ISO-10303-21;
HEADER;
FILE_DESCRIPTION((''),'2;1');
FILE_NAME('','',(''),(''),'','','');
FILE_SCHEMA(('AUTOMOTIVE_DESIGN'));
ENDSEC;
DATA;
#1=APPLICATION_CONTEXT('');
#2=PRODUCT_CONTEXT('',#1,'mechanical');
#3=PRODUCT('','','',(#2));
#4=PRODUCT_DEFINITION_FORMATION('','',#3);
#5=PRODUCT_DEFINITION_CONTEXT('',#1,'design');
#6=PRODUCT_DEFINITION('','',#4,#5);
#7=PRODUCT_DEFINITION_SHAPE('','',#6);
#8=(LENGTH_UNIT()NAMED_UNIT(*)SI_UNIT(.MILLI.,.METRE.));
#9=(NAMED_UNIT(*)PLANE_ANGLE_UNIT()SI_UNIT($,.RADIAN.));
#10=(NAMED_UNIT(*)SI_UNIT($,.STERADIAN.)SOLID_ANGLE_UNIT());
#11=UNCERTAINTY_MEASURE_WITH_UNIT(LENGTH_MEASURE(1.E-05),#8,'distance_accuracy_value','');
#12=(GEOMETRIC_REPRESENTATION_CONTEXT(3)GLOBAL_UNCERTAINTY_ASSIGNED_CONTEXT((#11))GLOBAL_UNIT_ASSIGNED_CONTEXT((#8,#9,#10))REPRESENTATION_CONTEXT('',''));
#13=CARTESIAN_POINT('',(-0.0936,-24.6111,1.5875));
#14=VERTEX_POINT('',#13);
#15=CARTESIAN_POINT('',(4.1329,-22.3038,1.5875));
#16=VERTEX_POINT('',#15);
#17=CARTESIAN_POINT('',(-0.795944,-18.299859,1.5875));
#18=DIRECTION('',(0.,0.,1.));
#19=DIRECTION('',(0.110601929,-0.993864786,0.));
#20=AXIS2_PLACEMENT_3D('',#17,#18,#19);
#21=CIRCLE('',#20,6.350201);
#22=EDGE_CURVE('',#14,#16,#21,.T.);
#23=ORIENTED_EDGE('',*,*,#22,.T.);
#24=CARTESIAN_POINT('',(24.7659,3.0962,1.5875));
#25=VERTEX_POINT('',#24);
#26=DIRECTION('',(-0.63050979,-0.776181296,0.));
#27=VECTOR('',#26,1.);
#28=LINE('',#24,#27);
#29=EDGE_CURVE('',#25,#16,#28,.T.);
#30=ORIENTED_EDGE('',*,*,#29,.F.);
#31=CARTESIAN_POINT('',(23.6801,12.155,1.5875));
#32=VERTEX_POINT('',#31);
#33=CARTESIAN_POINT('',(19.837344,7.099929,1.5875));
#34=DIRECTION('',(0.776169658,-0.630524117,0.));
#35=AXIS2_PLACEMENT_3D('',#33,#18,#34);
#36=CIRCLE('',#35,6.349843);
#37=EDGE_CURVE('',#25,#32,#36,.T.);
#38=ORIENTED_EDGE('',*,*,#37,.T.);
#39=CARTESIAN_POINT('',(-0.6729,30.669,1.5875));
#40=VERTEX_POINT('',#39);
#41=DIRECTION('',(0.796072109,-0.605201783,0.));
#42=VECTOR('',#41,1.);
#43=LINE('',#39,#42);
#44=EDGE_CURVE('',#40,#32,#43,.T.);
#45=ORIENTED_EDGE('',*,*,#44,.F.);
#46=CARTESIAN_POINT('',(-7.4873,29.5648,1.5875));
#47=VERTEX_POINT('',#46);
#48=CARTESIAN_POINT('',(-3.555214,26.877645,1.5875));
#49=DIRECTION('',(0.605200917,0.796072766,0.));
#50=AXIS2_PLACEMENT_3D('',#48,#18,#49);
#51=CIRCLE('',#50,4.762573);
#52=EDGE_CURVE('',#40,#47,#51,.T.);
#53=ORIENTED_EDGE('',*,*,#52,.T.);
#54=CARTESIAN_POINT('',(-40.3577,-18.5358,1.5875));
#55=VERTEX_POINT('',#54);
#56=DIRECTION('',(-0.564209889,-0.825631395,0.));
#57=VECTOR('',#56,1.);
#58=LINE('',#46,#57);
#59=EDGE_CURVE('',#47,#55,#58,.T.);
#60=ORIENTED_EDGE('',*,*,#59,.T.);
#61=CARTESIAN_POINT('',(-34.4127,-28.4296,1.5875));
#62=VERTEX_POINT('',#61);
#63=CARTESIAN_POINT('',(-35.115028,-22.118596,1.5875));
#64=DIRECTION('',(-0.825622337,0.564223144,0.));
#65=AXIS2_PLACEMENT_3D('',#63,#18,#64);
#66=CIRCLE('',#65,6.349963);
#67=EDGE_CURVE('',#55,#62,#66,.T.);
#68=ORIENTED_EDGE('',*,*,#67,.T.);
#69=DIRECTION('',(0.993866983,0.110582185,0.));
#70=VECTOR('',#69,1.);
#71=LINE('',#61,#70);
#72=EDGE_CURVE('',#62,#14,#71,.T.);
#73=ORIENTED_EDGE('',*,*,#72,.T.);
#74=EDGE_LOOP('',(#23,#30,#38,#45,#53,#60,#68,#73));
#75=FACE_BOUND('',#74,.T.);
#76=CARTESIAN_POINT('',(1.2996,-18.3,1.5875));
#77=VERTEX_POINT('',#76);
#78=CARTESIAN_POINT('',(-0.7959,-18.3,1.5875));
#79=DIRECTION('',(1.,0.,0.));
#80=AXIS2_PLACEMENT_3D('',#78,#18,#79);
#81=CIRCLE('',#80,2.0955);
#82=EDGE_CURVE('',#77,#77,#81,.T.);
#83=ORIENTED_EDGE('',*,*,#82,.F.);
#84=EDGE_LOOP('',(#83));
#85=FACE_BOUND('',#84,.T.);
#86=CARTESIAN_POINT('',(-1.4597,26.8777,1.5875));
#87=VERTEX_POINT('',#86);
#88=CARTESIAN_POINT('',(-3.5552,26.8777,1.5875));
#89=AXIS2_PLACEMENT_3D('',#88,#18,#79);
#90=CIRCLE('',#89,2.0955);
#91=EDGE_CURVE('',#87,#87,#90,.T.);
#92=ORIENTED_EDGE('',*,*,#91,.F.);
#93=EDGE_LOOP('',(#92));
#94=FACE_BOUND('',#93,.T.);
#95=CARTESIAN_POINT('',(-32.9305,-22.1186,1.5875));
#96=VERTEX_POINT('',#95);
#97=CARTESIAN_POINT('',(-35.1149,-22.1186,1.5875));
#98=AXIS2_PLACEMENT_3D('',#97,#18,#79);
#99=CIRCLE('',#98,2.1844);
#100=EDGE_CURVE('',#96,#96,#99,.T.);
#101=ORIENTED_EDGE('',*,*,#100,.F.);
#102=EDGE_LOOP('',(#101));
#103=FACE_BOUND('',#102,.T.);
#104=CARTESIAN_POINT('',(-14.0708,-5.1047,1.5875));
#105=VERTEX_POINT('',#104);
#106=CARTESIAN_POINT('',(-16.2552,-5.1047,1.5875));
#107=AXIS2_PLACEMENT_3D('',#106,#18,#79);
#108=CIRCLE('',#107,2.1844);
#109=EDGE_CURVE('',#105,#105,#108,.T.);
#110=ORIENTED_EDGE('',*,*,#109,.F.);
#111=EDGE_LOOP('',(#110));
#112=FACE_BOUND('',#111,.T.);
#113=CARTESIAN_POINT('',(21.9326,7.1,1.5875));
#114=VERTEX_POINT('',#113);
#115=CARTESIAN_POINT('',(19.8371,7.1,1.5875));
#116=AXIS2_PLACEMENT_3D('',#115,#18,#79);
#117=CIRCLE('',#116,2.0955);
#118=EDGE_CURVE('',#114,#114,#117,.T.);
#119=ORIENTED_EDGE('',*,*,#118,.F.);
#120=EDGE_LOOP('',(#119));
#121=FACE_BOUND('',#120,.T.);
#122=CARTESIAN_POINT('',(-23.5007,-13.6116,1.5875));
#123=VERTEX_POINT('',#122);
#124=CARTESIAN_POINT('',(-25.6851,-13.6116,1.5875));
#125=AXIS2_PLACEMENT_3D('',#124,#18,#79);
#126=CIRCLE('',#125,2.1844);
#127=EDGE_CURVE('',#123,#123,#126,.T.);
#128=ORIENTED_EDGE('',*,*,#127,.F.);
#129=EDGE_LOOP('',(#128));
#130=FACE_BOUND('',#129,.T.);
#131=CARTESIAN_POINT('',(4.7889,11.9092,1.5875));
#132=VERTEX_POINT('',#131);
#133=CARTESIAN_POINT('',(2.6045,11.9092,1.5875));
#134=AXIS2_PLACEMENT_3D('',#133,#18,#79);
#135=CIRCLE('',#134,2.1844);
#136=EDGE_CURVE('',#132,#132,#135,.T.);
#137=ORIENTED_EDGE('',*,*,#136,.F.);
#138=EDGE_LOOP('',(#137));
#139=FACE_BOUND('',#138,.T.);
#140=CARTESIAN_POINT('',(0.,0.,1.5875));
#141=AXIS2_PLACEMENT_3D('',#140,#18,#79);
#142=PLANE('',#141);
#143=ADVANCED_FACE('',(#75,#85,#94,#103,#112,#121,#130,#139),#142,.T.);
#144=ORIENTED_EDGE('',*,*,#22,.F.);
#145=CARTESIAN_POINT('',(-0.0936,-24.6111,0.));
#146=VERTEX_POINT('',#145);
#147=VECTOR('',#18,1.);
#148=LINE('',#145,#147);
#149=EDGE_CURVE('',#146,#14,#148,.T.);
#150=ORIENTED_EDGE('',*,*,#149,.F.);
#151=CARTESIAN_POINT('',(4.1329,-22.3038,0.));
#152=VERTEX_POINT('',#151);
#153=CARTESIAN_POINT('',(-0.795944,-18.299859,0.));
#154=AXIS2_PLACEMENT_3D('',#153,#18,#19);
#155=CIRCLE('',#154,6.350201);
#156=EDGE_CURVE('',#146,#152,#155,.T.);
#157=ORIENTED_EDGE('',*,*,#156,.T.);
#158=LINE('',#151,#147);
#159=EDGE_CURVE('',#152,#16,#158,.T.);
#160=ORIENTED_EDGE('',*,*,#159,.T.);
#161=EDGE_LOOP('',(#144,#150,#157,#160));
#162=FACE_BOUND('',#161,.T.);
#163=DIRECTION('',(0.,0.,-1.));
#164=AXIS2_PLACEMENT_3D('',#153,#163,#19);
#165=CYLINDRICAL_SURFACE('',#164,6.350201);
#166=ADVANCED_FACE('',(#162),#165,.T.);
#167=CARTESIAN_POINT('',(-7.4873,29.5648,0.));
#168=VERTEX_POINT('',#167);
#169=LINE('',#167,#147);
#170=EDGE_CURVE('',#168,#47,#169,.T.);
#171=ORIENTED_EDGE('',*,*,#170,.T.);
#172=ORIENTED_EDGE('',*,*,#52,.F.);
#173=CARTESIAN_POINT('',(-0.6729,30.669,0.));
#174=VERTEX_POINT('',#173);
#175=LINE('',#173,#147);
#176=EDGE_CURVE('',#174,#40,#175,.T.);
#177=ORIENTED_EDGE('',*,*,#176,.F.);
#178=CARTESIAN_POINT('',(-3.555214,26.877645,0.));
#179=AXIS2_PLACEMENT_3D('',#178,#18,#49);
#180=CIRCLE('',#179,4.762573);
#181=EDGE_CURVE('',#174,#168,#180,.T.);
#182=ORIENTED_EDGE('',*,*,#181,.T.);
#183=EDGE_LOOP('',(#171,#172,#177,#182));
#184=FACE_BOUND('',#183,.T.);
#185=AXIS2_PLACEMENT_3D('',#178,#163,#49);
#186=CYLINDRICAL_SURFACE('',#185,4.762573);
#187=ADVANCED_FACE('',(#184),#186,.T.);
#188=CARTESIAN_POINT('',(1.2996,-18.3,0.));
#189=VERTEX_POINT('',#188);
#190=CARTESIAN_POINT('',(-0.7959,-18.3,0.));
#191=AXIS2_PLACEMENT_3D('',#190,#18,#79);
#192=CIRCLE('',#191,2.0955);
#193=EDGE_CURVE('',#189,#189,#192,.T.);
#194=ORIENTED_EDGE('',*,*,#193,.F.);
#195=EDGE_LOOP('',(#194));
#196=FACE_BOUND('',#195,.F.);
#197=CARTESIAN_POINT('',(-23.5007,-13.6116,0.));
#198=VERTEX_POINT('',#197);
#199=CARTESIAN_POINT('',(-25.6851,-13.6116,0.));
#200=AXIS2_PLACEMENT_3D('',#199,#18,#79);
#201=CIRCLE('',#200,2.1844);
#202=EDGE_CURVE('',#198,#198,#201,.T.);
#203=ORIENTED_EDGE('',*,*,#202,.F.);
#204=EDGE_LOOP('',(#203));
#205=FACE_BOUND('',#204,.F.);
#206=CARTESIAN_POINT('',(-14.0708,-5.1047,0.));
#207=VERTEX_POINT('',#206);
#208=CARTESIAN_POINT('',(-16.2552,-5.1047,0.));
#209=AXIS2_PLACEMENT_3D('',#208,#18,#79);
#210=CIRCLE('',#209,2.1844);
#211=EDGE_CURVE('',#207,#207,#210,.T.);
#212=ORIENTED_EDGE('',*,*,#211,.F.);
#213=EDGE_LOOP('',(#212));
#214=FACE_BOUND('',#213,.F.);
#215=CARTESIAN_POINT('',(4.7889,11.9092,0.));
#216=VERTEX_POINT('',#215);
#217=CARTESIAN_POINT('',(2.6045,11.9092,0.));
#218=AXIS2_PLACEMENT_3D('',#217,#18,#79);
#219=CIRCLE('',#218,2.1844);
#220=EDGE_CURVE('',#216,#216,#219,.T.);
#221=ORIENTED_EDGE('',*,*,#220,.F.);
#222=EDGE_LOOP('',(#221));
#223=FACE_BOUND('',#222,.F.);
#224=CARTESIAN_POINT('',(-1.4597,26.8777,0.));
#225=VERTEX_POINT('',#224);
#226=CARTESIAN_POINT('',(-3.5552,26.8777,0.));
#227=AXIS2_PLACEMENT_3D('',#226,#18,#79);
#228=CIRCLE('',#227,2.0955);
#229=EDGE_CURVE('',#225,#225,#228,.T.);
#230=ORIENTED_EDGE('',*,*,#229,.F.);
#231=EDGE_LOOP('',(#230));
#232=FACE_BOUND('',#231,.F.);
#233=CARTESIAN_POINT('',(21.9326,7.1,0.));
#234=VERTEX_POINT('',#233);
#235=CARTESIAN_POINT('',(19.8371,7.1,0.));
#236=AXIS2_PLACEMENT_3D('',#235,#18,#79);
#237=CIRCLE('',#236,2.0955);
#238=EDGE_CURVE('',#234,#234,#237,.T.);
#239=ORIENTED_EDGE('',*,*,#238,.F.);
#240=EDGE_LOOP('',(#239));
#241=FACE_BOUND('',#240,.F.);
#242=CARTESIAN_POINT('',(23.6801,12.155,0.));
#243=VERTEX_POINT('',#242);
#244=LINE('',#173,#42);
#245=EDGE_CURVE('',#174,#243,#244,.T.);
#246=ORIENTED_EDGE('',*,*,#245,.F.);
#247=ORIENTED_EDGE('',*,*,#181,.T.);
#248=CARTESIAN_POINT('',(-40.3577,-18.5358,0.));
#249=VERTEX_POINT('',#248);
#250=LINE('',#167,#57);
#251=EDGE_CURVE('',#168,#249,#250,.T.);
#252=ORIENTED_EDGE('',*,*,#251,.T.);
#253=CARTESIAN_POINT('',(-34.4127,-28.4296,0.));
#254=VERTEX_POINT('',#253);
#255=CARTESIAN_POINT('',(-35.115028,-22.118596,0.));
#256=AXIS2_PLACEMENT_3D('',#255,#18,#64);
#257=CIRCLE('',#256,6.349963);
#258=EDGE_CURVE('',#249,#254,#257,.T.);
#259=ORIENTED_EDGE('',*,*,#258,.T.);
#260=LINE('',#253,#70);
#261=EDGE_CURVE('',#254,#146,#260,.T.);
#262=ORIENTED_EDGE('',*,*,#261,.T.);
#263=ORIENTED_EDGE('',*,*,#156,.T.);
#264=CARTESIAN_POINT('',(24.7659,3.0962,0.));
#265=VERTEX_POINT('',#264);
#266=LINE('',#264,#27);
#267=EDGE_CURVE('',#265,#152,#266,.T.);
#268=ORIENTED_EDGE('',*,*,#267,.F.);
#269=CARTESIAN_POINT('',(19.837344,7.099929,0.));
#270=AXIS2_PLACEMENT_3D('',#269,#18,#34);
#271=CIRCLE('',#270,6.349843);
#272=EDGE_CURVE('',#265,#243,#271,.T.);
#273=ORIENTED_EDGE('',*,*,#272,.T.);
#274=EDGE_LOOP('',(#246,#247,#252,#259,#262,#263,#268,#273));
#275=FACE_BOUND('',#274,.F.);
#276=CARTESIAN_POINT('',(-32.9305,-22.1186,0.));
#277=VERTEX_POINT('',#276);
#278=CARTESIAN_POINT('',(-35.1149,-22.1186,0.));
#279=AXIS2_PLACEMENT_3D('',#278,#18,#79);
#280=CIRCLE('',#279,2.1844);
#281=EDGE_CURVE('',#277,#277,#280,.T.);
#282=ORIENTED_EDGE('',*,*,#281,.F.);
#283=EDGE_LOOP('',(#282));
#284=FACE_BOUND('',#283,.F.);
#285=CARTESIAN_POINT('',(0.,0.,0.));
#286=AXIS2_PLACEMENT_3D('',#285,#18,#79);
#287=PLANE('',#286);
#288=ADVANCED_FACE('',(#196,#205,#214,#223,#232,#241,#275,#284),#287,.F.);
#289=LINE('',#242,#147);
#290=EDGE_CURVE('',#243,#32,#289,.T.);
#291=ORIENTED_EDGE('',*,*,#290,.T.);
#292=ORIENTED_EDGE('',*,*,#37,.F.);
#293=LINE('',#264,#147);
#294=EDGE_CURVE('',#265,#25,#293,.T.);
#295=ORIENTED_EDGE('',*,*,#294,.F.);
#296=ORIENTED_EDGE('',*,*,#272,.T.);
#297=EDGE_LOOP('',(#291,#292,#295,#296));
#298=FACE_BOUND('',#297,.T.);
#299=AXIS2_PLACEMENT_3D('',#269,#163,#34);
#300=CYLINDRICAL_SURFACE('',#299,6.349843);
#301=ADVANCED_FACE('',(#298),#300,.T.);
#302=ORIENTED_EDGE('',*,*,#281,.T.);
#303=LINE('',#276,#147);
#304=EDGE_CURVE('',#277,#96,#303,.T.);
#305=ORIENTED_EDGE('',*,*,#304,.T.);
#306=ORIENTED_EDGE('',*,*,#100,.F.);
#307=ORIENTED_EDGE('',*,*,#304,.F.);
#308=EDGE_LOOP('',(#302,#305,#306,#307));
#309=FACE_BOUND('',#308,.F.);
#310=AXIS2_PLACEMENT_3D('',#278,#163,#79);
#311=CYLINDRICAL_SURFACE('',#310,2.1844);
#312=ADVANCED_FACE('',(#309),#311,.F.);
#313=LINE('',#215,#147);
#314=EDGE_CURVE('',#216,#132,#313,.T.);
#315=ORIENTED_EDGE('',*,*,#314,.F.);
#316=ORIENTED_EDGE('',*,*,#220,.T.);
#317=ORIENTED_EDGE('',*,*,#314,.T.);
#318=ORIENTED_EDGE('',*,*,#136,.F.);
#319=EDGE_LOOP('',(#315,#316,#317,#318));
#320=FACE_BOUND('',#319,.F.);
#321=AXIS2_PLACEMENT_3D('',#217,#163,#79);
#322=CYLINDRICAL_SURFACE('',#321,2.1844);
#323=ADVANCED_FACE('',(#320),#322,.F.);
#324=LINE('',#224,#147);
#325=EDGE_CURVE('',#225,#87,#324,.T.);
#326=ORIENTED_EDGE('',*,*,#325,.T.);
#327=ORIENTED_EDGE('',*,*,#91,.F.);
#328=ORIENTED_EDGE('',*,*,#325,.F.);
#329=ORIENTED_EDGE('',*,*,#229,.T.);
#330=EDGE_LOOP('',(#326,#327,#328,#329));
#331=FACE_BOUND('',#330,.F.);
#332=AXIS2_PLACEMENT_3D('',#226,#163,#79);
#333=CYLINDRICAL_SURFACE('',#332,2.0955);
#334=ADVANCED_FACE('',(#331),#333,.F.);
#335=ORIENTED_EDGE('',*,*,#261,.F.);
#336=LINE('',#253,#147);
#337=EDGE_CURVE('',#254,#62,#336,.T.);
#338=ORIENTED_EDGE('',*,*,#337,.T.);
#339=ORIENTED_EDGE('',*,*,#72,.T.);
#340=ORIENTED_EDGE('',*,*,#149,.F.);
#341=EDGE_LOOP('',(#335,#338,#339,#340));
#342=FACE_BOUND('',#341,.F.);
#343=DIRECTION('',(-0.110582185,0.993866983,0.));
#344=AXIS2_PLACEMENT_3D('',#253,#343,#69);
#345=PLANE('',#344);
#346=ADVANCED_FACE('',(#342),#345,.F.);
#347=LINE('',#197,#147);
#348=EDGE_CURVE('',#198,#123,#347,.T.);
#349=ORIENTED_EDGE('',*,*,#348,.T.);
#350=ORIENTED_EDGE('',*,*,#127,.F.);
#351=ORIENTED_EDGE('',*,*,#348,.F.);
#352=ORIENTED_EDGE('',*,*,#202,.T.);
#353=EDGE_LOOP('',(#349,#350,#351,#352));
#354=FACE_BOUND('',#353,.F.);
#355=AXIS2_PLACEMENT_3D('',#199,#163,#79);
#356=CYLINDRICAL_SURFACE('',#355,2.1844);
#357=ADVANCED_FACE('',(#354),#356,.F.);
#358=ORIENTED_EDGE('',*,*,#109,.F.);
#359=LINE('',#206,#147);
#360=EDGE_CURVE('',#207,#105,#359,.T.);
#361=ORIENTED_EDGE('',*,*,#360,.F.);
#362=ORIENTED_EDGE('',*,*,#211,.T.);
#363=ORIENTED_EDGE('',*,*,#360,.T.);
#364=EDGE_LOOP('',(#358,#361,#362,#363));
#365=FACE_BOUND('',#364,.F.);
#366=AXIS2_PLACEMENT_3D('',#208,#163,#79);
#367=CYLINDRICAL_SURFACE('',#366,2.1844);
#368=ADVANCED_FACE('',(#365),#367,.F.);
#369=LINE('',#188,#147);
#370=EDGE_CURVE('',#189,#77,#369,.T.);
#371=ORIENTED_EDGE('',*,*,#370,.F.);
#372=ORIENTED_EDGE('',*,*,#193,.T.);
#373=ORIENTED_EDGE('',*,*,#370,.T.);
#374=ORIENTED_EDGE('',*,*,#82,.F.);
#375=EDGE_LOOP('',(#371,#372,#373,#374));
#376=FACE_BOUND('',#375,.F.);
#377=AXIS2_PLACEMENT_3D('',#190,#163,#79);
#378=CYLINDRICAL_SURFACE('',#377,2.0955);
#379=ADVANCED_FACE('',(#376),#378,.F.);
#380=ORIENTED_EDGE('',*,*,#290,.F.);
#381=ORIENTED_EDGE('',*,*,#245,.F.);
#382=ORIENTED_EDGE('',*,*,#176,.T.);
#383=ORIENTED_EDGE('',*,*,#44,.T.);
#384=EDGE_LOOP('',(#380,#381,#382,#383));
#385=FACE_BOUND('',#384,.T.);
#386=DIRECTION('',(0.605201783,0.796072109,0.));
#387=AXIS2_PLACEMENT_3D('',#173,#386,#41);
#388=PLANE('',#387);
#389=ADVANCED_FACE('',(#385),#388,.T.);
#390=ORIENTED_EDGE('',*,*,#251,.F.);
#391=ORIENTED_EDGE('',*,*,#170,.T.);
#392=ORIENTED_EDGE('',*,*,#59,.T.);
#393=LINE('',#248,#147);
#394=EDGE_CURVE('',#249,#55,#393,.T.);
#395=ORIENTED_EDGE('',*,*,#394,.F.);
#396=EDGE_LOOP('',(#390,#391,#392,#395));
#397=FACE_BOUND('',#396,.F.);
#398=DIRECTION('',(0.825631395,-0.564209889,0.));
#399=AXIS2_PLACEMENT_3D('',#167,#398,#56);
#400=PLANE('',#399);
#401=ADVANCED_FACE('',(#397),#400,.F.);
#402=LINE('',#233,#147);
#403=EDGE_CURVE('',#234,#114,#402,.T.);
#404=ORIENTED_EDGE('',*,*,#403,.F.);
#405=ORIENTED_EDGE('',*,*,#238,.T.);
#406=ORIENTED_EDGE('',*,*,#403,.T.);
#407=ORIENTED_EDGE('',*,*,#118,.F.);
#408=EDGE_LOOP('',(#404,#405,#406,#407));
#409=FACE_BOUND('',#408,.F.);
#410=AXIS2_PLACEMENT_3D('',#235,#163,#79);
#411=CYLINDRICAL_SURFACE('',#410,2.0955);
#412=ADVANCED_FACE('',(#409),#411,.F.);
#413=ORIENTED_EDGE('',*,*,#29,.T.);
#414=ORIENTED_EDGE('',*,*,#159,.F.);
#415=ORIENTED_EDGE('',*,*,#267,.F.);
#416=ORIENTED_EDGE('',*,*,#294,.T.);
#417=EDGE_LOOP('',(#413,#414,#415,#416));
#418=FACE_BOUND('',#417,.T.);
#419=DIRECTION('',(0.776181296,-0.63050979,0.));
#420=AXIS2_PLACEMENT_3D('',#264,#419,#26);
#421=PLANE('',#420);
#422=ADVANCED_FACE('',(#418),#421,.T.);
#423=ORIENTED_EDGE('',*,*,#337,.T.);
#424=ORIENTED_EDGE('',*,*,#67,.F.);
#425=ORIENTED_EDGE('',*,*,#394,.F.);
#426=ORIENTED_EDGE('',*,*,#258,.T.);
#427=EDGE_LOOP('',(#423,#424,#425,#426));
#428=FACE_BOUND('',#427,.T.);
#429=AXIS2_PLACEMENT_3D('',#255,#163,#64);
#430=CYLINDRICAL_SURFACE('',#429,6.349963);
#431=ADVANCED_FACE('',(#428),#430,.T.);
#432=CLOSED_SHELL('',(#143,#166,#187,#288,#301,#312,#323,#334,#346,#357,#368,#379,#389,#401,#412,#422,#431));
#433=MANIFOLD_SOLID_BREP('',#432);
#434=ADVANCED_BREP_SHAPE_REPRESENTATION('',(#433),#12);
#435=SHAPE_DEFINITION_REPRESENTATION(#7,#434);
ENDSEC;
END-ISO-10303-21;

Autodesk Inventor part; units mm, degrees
ref_plane "YZ Plane" through (0, 0, 0) normal (1, 0, 0) x (0, 1, 0)
ref_plane "XZ Plane" through (0, 0, 0) normal (0, 1, 0) x (-1, 0, 0)
ref_plane "XY Plane" through (0, 0, 0) normal (0, 0, 1) x (1, 0, 0)
sketch "main" plane through (0, 0, 0) normal (0, 0, 1) x (1, 0, 0)
  circle A0 centre (2.6045, 11.9092) radius 2.1844
  circle A1 centre (-3.5552, 26.8777) radius 2.0955
  arc A2 (-0.6729, 30.669) -> (-7.4873, 29.5648) centre (-3.5552, 26.8777) ccw
  circle A3 centre (19.8371, 7.1) radius 2.0955
  arc A4 (24.7659, 3.0962) -> (23.6801, 12.155) centre (19.8371, 7.1) ccw
  circle A5 centre (-16.2552, -5.1047) radius 2.1844
  circle A6 centre (-0.7959, -18.3) radius 2.0955
  arc A7 (-0.0936, -24.6111) -> (4.1329, -22.3038) centre (-0.7959, -18.3) ccw
  circle A8 centre (-25.6851, -13.6116) radius 2.1844
  line L0 (-34.4127, -28.4296) -> (-0.0936, -24.6111)
  circle A9 centre (-35.1149, -22.1186) radius 2.1844
  arc A10 (-40.3577, -18.5358) -> (-34.4127, -28.4296) centre (-35.1149, -22.1186) ccw
  line L1 (-7.4873, 29.5648) -> (-40.3577, -18.5358)
  line L2 (24.7659, 3.0962) -> (4.1329, -22.3038)
  line L3 (-0.6729, 30.669) -> (23.6801, 12.155)
  point P0 (-5.4325, -4.0149)
  point P1 (-6.8254, 3.4022)
  dimension "d2" = 4.191
  dimension "d3" = 12.7
  dimension "d5" = 12.7
  dimension "d6" = 12.7
  dimension "d8" = 4.191
  dimension "d9" = 9.525
  dimension "d10" = 4.191
  dimension "d13" = 4.3688
sketch "Sketch1" plane through (0, 0, 0) normal (0, 0, 1) x (1, 0, 0)
  circle A0 centre (2.6045, 11.9092) radius 2.1844
  circle A1 centre (-3.5552, 26.8777) radius 2.0955
  arc A2 (-0.6729, 30.669) -> (-7.4873, 29.5648) centre (-3.5552, 26.8777) ccw
  circle A3 centre (19.8371, 7.1) radius 2.0955
  arc A4 (24.7659, 3.0962) -> (23.6801, 12.155) centre (19.8371, 7.1) ccw
  circle A5 centre (-16.2552, -5.1047) radius 2.1844
  circle A6 centre (-0.7959, -18.3) radius 2.0955
  arc A7 (-0.0936, -24.6111) -> (4.1329, -22.3038) centre (-0.7959, -18.3) ccw
  circle A8 centre (-25.6851, -13.6116) radius 2.1844
  line L0 (-34.4127, -28.4296) -> (-0.0936, -24.6111)
  circle A9 centre (-35.1149, -22.1186) radius 2.1844
  arc A10 (-40.3577, -18.5358) -> (-34.4127, -28.4296) centre (-35.1149, -22.1186) ccw
  line L1 (-7.4873, 29.5648) -> (-40.3577, -18.5358)
  line L2 (24.7659, 3.0962) -> (4.1329, -22.3038)
  line L3 (-0.6729, 30.669) -> (23.6801, 12.155)
  point P0 (0, 0)
extrude "Extrusion1" add sketch "Sketch1" along normal blind 1.5875
properties part number "Gearbox" material "Acetal Resin, White"
